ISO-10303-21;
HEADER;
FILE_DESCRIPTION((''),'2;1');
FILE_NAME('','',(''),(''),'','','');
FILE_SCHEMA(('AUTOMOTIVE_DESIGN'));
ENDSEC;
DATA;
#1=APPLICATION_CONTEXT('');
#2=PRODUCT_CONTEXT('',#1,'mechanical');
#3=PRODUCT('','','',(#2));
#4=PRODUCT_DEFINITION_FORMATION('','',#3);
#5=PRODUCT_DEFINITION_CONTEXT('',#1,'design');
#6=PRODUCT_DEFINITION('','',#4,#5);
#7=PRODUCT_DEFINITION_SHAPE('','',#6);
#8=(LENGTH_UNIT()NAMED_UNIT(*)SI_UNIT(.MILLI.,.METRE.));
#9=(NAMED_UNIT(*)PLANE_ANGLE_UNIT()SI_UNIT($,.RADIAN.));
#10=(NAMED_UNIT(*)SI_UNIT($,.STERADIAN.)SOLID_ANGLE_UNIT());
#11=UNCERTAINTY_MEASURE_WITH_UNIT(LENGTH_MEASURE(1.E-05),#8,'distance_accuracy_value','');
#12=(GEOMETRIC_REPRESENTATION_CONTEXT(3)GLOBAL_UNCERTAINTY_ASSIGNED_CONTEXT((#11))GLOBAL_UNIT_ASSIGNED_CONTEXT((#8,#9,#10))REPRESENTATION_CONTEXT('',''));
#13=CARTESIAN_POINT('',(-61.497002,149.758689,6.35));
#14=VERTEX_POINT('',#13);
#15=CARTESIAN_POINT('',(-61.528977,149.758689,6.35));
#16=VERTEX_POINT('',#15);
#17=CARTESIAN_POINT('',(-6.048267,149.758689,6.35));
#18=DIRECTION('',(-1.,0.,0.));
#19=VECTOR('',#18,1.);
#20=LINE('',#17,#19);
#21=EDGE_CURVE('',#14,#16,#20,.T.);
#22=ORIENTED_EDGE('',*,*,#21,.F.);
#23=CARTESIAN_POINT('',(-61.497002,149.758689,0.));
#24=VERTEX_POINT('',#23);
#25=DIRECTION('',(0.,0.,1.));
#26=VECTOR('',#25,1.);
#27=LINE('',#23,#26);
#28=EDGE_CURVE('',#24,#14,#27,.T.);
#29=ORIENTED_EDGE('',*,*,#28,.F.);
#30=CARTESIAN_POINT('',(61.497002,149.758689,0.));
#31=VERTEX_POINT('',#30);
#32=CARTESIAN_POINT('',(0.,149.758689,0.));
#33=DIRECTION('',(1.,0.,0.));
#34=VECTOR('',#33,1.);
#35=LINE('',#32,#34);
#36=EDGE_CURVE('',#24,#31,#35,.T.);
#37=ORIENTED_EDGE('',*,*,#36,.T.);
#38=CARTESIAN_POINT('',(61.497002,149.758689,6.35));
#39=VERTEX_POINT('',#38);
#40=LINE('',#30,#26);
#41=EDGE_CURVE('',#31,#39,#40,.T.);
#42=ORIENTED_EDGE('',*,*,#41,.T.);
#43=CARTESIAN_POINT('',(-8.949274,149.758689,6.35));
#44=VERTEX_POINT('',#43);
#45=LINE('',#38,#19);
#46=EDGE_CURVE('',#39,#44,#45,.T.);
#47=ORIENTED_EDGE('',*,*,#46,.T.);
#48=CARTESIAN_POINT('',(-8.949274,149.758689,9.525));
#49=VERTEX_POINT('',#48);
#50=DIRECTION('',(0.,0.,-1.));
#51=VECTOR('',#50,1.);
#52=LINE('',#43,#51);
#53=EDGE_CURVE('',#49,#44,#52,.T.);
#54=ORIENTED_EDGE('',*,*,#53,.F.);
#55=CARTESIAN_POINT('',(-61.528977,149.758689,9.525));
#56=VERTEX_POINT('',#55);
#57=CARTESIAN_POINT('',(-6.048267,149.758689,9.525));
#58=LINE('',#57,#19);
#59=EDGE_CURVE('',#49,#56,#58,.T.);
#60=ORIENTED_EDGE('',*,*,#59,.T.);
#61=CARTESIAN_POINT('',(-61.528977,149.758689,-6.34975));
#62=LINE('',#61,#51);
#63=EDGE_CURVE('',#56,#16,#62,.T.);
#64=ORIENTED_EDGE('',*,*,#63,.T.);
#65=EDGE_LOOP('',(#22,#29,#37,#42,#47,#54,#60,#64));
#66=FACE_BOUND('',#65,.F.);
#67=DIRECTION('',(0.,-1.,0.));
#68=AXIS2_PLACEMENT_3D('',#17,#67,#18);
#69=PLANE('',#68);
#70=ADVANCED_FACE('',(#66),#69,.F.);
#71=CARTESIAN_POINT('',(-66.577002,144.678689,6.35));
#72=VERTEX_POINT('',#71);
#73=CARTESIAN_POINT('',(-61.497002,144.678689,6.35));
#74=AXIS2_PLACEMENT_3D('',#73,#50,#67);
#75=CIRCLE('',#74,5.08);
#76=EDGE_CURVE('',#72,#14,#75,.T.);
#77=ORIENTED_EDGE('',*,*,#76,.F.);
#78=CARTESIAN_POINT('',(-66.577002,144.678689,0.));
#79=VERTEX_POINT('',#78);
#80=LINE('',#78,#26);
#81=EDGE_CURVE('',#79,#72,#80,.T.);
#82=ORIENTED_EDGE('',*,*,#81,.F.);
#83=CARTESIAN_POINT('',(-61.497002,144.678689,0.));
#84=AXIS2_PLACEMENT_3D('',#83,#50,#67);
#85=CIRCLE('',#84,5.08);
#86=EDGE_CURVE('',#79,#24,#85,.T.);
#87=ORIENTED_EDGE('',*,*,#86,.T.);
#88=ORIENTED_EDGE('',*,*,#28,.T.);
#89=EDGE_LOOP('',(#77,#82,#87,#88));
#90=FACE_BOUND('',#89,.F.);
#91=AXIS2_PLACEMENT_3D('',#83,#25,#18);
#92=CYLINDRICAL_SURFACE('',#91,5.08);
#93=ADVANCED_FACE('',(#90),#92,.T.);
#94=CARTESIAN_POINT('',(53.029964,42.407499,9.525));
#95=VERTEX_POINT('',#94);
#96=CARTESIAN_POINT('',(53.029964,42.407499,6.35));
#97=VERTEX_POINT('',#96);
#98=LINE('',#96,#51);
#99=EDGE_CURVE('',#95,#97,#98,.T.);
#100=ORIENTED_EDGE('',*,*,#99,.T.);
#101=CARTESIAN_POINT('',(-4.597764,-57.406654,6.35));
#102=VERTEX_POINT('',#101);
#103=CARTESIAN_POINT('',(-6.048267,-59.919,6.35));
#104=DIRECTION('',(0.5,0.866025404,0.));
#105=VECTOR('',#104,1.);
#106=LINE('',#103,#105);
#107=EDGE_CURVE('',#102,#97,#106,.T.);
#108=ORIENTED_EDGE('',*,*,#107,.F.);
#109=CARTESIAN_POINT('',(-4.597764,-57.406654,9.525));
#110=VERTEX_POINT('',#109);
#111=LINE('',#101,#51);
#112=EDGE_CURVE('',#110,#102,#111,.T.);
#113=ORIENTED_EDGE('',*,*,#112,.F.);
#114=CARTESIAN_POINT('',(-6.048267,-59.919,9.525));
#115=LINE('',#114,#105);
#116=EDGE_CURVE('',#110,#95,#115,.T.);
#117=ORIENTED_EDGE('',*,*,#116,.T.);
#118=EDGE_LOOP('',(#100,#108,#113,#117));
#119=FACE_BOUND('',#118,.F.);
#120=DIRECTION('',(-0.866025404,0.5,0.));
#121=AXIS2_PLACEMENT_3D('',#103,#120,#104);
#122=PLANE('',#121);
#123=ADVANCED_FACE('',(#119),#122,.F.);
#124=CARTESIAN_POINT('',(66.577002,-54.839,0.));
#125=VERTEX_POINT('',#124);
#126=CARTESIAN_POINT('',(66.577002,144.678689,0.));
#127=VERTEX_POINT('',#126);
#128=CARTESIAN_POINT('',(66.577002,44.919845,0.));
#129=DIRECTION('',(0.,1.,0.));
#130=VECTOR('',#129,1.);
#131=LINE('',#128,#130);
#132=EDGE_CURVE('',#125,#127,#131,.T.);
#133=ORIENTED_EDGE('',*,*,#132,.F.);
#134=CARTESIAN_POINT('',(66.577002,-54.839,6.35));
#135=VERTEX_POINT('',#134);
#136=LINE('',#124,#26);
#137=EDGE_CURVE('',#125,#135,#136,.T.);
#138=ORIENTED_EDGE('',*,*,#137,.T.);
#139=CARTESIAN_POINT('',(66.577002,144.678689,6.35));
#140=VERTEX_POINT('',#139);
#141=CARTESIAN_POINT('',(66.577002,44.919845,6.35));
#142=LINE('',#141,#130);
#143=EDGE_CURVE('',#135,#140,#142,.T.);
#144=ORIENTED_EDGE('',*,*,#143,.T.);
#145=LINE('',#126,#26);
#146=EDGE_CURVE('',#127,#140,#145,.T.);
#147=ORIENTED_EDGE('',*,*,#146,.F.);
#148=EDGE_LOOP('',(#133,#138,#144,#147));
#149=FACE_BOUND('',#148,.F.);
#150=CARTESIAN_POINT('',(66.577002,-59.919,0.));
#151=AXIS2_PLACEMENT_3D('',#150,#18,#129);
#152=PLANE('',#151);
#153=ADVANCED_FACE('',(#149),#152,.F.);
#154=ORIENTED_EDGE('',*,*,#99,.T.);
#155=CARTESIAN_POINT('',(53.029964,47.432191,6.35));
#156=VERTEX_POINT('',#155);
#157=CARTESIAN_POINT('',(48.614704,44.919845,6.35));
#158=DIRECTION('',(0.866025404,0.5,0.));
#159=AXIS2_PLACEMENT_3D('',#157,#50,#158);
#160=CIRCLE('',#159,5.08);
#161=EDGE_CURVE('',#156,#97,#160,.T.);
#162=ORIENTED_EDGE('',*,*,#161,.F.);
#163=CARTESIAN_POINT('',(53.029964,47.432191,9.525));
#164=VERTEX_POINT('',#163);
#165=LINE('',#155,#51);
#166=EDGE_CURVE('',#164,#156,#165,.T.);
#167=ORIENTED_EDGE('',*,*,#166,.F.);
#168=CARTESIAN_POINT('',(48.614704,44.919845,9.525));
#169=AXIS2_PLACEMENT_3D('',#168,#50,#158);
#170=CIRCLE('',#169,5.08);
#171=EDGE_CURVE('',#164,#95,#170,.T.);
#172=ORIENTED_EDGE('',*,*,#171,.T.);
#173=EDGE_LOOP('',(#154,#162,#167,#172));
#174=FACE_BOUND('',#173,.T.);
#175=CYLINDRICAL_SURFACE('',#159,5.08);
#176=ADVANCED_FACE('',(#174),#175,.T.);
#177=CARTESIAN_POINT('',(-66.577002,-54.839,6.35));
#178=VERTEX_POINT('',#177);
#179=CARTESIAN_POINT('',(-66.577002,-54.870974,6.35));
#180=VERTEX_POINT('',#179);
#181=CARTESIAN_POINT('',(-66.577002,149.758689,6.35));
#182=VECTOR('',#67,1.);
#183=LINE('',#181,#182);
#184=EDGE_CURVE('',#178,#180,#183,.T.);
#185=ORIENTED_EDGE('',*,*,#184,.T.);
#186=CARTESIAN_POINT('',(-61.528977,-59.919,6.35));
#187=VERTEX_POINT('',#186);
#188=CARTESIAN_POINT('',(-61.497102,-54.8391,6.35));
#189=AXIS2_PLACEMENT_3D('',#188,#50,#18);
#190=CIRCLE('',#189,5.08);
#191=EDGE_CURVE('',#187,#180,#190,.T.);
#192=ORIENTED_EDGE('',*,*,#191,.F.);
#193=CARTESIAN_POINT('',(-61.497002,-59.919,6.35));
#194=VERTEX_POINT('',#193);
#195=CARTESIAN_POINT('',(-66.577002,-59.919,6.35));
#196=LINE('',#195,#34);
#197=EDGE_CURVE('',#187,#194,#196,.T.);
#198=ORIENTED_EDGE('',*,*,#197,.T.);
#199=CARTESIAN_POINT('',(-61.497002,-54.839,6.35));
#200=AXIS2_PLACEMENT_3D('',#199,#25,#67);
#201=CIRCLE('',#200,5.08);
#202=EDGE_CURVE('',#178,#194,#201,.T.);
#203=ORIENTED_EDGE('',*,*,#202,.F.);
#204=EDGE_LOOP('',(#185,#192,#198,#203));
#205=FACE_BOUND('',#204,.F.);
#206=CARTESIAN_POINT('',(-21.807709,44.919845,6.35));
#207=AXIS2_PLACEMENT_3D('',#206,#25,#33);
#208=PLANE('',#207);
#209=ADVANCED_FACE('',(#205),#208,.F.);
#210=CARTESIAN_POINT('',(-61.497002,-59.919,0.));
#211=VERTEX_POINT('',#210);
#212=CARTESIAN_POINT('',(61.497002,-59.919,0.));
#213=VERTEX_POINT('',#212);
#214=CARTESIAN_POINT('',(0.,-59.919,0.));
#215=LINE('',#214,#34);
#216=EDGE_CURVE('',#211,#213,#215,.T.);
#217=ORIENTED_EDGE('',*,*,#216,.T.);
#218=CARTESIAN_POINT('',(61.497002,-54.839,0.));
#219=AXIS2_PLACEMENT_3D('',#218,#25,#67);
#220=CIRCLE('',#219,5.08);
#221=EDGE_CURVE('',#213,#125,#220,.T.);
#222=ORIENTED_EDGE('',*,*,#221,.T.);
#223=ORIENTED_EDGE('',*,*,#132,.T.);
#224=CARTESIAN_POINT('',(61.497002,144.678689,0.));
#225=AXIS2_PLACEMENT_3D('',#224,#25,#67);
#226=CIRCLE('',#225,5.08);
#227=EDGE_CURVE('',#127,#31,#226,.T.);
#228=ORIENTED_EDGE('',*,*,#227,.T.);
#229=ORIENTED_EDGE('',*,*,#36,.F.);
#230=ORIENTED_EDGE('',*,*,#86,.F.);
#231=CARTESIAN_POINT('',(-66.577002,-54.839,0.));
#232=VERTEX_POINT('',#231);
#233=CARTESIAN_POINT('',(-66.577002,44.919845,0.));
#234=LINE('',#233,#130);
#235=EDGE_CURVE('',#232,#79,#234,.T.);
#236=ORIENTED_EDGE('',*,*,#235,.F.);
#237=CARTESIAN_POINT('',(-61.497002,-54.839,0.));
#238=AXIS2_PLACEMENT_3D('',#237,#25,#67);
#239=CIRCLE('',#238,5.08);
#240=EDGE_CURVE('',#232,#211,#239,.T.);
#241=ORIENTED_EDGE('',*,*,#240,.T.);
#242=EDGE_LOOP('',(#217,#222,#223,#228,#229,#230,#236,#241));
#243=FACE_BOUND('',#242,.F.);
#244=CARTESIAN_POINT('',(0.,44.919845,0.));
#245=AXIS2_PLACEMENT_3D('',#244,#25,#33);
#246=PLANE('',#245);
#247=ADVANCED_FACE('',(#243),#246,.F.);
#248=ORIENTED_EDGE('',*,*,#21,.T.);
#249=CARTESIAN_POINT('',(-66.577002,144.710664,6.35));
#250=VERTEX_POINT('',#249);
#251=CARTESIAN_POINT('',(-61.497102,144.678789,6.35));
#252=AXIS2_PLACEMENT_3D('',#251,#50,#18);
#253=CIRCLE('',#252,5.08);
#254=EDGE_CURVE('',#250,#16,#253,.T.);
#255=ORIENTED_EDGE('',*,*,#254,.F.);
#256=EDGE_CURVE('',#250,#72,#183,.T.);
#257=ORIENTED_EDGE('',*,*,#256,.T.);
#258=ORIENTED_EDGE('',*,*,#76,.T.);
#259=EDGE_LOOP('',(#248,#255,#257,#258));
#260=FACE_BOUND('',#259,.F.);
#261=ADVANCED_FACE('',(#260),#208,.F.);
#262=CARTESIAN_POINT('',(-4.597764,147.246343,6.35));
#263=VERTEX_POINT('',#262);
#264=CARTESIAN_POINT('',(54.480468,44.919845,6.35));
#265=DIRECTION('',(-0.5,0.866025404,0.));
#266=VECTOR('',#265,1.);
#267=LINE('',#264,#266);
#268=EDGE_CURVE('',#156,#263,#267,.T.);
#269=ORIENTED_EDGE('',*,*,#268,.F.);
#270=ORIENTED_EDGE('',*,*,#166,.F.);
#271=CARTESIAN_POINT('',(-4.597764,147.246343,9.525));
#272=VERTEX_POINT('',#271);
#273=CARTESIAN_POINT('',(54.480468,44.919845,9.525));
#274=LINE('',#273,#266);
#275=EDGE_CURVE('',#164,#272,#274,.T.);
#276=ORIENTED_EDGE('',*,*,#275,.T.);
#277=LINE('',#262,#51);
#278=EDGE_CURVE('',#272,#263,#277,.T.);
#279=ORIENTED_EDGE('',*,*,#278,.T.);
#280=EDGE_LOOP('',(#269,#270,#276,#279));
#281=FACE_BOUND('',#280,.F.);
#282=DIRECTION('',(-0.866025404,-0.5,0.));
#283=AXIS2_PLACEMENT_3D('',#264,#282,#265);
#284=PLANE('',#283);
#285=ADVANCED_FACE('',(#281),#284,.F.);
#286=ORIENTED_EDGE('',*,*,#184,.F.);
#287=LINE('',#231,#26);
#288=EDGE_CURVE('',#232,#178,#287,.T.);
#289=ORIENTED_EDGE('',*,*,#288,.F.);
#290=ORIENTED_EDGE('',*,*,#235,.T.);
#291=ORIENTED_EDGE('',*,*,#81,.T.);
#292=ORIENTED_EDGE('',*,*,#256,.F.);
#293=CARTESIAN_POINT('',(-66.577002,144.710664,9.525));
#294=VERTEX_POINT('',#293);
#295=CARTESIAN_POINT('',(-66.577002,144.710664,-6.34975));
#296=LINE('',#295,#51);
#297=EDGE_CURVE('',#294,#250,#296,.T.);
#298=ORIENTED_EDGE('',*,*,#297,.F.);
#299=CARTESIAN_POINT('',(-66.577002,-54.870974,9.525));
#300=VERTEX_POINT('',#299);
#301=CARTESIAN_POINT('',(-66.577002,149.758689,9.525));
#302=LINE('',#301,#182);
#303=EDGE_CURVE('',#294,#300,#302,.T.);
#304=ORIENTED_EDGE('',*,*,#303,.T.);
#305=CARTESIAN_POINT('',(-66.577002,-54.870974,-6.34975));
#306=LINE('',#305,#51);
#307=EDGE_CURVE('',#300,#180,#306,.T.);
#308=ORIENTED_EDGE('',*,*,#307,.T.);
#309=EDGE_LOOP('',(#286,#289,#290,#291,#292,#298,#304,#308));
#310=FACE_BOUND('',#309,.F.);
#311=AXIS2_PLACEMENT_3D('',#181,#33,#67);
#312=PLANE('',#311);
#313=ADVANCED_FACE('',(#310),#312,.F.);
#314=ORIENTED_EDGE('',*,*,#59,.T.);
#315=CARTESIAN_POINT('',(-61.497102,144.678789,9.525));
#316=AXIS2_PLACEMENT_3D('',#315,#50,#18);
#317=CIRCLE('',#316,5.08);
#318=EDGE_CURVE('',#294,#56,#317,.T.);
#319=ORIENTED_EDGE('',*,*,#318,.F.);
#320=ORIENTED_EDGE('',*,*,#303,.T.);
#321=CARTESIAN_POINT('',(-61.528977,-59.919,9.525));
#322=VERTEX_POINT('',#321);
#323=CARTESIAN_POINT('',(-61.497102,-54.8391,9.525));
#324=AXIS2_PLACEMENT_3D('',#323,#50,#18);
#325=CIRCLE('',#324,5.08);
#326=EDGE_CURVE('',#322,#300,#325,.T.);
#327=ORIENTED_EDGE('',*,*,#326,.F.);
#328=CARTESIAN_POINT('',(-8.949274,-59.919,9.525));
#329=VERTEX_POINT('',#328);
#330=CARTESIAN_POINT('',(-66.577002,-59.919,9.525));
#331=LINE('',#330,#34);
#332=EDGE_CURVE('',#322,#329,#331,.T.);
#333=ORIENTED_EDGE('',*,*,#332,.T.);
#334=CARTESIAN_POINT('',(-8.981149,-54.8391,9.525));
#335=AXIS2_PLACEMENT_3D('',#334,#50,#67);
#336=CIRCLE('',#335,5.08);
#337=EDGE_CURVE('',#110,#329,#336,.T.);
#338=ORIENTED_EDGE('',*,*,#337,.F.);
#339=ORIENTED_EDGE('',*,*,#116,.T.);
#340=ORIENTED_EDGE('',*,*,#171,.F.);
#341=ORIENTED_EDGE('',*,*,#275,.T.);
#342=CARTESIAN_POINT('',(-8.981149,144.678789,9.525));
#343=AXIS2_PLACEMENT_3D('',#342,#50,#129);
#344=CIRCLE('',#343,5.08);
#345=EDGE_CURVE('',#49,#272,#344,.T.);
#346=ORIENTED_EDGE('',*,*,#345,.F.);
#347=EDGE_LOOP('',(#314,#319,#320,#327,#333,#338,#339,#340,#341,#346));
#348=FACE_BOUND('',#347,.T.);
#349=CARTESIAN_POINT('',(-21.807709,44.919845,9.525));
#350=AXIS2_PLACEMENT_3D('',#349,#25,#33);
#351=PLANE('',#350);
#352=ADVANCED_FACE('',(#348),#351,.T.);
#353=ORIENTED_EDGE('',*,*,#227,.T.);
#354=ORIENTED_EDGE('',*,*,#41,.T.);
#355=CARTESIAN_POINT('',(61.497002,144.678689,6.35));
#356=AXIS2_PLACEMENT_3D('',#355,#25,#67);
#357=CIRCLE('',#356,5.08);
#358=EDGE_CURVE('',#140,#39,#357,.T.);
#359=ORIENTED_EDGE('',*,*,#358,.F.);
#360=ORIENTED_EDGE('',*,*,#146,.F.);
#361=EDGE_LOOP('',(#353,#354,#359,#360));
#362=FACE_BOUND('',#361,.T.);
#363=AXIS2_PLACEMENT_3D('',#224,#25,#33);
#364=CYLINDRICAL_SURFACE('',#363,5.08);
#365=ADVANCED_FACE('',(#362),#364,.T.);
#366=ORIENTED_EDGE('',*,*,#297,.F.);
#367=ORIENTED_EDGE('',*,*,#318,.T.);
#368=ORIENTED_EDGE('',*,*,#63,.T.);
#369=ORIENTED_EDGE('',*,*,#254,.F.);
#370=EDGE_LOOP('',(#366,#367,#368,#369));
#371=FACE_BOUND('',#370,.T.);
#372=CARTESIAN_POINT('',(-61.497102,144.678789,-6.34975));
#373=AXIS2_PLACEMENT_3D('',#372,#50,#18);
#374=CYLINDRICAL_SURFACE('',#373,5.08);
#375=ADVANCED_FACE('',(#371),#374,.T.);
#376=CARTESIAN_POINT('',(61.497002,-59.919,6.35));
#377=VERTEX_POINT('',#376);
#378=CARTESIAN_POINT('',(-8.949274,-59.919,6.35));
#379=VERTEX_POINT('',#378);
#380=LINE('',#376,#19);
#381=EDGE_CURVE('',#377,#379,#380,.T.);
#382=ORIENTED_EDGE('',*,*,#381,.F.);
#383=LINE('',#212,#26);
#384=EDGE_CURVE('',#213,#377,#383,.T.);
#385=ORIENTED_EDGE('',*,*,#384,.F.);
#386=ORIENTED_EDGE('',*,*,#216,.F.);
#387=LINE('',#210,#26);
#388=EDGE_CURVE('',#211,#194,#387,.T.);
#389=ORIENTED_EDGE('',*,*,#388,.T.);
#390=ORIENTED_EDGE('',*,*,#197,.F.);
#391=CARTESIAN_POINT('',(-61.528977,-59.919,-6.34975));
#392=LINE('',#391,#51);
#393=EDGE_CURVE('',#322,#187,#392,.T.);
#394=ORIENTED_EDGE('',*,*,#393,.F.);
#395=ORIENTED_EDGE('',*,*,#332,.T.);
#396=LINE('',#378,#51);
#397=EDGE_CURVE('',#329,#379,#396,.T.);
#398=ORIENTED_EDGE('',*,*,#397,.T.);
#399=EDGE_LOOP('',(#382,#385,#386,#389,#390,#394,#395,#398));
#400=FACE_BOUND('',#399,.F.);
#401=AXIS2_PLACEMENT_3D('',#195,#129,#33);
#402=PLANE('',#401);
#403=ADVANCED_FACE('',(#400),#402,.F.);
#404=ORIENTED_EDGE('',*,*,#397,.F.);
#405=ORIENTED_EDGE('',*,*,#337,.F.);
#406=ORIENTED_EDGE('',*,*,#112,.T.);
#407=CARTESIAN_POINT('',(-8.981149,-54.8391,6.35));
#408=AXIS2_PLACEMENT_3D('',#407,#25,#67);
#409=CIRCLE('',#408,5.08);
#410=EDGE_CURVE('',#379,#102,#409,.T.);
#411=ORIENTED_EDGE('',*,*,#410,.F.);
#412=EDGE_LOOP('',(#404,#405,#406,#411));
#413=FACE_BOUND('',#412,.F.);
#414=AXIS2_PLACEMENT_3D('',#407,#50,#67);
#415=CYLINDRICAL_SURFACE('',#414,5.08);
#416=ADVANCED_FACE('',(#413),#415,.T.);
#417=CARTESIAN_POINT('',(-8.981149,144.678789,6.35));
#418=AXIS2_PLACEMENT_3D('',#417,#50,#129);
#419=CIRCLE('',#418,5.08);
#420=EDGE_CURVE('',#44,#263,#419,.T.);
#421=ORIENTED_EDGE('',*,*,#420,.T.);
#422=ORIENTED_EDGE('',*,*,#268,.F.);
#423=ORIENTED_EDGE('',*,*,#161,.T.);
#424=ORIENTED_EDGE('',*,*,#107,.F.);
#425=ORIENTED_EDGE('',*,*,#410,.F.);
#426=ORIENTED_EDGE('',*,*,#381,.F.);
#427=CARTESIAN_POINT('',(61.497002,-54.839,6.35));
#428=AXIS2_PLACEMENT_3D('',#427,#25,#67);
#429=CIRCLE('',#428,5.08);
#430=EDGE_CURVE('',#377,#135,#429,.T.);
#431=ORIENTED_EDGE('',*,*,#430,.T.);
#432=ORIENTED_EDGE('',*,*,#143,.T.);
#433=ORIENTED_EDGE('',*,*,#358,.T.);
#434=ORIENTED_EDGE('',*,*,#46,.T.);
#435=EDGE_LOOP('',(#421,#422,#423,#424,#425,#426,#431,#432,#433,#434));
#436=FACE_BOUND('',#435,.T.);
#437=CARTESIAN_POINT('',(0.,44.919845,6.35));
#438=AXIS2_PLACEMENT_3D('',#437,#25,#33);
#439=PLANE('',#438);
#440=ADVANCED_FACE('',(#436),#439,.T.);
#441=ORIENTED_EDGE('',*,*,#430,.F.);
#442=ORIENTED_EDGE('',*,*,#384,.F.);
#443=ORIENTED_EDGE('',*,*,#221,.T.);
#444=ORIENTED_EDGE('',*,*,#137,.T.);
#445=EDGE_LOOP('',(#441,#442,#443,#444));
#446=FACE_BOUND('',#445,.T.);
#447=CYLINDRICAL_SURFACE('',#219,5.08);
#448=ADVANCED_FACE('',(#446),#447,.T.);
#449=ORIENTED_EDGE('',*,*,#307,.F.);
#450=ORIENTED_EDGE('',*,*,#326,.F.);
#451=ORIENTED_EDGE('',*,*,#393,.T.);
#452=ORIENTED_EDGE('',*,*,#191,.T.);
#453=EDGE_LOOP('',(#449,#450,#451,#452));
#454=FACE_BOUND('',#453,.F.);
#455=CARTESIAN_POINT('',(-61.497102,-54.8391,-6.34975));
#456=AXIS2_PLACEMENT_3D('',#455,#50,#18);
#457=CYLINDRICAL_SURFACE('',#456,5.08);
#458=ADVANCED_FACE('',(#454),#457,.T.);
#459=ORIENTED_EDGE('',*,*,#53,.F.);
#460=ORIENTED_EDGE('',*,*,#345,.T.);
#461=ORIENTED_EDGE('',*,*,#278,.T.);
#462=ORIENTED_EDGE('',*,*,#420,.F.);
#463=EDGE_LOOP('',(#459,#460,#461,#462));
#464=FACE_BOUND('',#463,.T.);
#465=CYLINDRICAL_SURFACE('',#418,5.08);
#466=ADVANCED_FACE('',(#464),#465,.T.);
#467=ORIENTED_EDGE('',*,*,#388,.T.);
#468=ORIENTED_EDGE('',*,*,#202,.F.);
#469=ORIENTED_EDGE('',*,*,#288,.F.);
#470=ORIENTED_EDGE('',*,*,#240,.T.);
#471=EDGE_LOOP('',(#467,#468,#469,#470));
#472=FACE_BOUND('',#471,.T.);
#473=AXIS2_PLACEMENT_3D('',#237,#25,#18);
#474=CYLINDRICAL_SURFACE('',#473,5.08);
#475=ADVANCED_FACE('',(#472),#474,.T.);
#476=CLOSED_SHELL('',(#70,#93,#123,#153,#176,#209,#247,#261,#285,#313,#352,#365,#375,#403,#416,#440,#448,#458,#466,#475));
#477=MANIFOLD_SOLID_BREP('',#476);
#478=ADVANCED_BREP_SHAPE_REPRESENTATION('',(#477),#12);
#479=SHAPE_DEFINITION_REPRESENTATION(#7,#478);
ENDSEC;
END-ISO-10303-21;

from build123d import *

# Parameters (mm, degrees)
F0_W        = 133.1540048122
F0_H        = 209.6776887774
F1_DEPTH    = 6.35
F3_R        = 5.08
F4_DEPTH    = 3.175
F5_T1_DEPTH = 10.5072040854
F5_T3_DEPTH = 28.5745000049


# Not quite as in the source:
# - a fillet or chamfer that OpenCascade refuses, or shapes differently, is made with other operations: its cross-section is extruded or revolved along the edge and cut away or added
# - two fillets or chamfers of one size are made in one step


with BuildPart() as f1:
    # F0 (on Top) → F1 (new body)
    with BuildSketch(Plane.XY):
        with Locations((0, 44.9198447168)):
            Rectangle(F0_W, F0_H)
    extrude(amount=F1_DEPTH)

    # F3
    f3_edges = [f1.edges().sort_by_distance(p)[0] for p in [
        (66.577002, -59.919, 3.175),
        (66.577002, 149.758689, 3.175),
        (-66.577002, 149.758689, 3.175),
        (-66.577002, -59.919, 3.175),
    ]]
    fillet(f3_edges, radius=F3_R)

    # F2 (on face) → F4 (join)
    with BuildSketch(Plane.XY.offset(6.35)):
        Polygon((-66.5770024061, -59.9189996719), (-6.0482673768, -59.9189996719), (54.4804676526, 44.9198447168), (-6.0482673768, 149.7586891055), (-66.5770024061, 149.7586891055), align=None)
    extrude(amount=F4_DEPTH)

    # F5: fillet of radius 5.08 on 5 edges, made by hand

    # F5_s2 → F5_t1 (cut)
    with BuildSketch(Plane.XY.offset(6.35)):
        with BuildLine():
            ThreePointArc((-8.9811490092, -59.9190996719), (-6.4411490092, -59.2385087232), (-4.581739958, -57.3790996719))
            Line((-4.581739958, -57.3790996719), (-4.493751777, -57.4298996719))
            ThreePointArc((-4.493751777, -57.4298996719), (-5.2270587876, -58.6998246719), (-5.9602791957, -59.9697996719))
            Line((-5.9602791957, -59.9697996719), (-6.0482673768, -60.0205996719))
            ThreePointArc((-6.0482673768, -60.0205996719), (-7.514708193, -60.0205996719), (-8.9811490092, -60.0206996719))
            Line((-8.9811490092, -60.0206996719), (-8.9811490092, -59.9190996719))
        make_face()
        with BuildLine():
            ThreePointArc((-8.9811490092, 149.7587891055), (-6.4411490092, 149.0781981567), (-4.581739958, 147.2187891055))
            Line((-4.581739958, 147.2187891055), (-4.493751777, 147.2695891055))
            ThreePointArc((-4.493751777, 147.2695891055), (-5.2270587876, 148.5395141055), (-5.9602791957, 149.8094891055))
            Line((-5.9602791957, 149.8094891055), (-6.0482673768, 149.8602891055))
            ThreePointArc((-6.0482673768, 149.8602891055), (-7.514708193, 149.8602891055), (-8.9811490092, 149.8603891055))
            Line((-8.9811490092, 149.8603891055), (-8.9811490092, 149.7587891055))
        make_face()
        with BuildLine():
            ThreePointArc((53.0141134389, 47.4598447168), (53.6947043877, 44.9198447168), (53.0141134389, 42.3798447168))
            Line((53.0141134389, 42.3798447168), (53.1021016199, 42.3290447168))
            ThreePointArc((53.1021016199, 42.3290447168), (53.8352354255, 43.5990697168), (54.5684558336, 44.8690447168))
            Line((54.5684558336, 44.8690447168), (54.5684558336, 44.9706447168))
            ThreePointArc((54.5684558336, 44.9706447168), (53.8352354255, 46.2406197168), (53.1021016199, 47.5106447168))
            Line((53.1021016199, 47.5106447168), (53.0141134389, 47.4598447168))
        make_face()
    extrude(amount=F5_T1_DEPTH, mode=Mode.SUBTRACT)

    # F5_s4 → F5_t3 (cut)
    with BuildSketch(Plane.XY.offset(-6.3497500025)):
        with BuildLine():
            ThreePointArc((-66.5771024061, 144.6787891055), (-65.0892048545, 148.2708915539), (-61.4971024061, 149.7587891055))
            Line((-61.4971024061, 149.7587891055), (-61.4971024061, 149.8603891055))
            ThreePointArc((-61.4971024061, 149.8603891055), (-64.0370524061, 149.8602891055), (-66.5770024061, 149.8602891055))
            Line((-66.5770024061, 149.8602891055), (-66.6786024061, 149.7586891055))
            ThreePointArc((-66.6786024061, 149.7586891055), (-66.6786024061, 147.2187391055), (-66.6787024061, 144.6787891055))
            Line((-66.6787024061, 144.6787891055), (-66.5771024061, 144.6787891055))
        make_face()
        with BuildLine():
            ThreePointArc((-66.5771024061, -54.8390996719), (-65.0892048545, -58.4312021204), (-61.4971024061, -59.9190996719))
            Line((-61.4971024061, -59.9190996719), (-61.4971024061, -60.0206996719))
            ThreePointArc((-61.4971024061, -60.0206996719), (-64.0370524061, -60.0205996719), (-66.5770024061, -60.0205996719))
            Line((-66.5770024061, -60.0205996719), (-66.6786024061, -59.9189996719))
            ThreePointArc((-66.6786024061, -59.9189996719), (-66.6786024061, -57.3790496719), (-66.6787024061, -54.8390996719))
            Line((-66.6787024061, -54.8390996719), (-66.5771024061, -54.8390996719))
        make_face()
    extrude(amount=F5_T3_DEPTH, mode=Mode.SUBTRACT)


solid = f1.part
